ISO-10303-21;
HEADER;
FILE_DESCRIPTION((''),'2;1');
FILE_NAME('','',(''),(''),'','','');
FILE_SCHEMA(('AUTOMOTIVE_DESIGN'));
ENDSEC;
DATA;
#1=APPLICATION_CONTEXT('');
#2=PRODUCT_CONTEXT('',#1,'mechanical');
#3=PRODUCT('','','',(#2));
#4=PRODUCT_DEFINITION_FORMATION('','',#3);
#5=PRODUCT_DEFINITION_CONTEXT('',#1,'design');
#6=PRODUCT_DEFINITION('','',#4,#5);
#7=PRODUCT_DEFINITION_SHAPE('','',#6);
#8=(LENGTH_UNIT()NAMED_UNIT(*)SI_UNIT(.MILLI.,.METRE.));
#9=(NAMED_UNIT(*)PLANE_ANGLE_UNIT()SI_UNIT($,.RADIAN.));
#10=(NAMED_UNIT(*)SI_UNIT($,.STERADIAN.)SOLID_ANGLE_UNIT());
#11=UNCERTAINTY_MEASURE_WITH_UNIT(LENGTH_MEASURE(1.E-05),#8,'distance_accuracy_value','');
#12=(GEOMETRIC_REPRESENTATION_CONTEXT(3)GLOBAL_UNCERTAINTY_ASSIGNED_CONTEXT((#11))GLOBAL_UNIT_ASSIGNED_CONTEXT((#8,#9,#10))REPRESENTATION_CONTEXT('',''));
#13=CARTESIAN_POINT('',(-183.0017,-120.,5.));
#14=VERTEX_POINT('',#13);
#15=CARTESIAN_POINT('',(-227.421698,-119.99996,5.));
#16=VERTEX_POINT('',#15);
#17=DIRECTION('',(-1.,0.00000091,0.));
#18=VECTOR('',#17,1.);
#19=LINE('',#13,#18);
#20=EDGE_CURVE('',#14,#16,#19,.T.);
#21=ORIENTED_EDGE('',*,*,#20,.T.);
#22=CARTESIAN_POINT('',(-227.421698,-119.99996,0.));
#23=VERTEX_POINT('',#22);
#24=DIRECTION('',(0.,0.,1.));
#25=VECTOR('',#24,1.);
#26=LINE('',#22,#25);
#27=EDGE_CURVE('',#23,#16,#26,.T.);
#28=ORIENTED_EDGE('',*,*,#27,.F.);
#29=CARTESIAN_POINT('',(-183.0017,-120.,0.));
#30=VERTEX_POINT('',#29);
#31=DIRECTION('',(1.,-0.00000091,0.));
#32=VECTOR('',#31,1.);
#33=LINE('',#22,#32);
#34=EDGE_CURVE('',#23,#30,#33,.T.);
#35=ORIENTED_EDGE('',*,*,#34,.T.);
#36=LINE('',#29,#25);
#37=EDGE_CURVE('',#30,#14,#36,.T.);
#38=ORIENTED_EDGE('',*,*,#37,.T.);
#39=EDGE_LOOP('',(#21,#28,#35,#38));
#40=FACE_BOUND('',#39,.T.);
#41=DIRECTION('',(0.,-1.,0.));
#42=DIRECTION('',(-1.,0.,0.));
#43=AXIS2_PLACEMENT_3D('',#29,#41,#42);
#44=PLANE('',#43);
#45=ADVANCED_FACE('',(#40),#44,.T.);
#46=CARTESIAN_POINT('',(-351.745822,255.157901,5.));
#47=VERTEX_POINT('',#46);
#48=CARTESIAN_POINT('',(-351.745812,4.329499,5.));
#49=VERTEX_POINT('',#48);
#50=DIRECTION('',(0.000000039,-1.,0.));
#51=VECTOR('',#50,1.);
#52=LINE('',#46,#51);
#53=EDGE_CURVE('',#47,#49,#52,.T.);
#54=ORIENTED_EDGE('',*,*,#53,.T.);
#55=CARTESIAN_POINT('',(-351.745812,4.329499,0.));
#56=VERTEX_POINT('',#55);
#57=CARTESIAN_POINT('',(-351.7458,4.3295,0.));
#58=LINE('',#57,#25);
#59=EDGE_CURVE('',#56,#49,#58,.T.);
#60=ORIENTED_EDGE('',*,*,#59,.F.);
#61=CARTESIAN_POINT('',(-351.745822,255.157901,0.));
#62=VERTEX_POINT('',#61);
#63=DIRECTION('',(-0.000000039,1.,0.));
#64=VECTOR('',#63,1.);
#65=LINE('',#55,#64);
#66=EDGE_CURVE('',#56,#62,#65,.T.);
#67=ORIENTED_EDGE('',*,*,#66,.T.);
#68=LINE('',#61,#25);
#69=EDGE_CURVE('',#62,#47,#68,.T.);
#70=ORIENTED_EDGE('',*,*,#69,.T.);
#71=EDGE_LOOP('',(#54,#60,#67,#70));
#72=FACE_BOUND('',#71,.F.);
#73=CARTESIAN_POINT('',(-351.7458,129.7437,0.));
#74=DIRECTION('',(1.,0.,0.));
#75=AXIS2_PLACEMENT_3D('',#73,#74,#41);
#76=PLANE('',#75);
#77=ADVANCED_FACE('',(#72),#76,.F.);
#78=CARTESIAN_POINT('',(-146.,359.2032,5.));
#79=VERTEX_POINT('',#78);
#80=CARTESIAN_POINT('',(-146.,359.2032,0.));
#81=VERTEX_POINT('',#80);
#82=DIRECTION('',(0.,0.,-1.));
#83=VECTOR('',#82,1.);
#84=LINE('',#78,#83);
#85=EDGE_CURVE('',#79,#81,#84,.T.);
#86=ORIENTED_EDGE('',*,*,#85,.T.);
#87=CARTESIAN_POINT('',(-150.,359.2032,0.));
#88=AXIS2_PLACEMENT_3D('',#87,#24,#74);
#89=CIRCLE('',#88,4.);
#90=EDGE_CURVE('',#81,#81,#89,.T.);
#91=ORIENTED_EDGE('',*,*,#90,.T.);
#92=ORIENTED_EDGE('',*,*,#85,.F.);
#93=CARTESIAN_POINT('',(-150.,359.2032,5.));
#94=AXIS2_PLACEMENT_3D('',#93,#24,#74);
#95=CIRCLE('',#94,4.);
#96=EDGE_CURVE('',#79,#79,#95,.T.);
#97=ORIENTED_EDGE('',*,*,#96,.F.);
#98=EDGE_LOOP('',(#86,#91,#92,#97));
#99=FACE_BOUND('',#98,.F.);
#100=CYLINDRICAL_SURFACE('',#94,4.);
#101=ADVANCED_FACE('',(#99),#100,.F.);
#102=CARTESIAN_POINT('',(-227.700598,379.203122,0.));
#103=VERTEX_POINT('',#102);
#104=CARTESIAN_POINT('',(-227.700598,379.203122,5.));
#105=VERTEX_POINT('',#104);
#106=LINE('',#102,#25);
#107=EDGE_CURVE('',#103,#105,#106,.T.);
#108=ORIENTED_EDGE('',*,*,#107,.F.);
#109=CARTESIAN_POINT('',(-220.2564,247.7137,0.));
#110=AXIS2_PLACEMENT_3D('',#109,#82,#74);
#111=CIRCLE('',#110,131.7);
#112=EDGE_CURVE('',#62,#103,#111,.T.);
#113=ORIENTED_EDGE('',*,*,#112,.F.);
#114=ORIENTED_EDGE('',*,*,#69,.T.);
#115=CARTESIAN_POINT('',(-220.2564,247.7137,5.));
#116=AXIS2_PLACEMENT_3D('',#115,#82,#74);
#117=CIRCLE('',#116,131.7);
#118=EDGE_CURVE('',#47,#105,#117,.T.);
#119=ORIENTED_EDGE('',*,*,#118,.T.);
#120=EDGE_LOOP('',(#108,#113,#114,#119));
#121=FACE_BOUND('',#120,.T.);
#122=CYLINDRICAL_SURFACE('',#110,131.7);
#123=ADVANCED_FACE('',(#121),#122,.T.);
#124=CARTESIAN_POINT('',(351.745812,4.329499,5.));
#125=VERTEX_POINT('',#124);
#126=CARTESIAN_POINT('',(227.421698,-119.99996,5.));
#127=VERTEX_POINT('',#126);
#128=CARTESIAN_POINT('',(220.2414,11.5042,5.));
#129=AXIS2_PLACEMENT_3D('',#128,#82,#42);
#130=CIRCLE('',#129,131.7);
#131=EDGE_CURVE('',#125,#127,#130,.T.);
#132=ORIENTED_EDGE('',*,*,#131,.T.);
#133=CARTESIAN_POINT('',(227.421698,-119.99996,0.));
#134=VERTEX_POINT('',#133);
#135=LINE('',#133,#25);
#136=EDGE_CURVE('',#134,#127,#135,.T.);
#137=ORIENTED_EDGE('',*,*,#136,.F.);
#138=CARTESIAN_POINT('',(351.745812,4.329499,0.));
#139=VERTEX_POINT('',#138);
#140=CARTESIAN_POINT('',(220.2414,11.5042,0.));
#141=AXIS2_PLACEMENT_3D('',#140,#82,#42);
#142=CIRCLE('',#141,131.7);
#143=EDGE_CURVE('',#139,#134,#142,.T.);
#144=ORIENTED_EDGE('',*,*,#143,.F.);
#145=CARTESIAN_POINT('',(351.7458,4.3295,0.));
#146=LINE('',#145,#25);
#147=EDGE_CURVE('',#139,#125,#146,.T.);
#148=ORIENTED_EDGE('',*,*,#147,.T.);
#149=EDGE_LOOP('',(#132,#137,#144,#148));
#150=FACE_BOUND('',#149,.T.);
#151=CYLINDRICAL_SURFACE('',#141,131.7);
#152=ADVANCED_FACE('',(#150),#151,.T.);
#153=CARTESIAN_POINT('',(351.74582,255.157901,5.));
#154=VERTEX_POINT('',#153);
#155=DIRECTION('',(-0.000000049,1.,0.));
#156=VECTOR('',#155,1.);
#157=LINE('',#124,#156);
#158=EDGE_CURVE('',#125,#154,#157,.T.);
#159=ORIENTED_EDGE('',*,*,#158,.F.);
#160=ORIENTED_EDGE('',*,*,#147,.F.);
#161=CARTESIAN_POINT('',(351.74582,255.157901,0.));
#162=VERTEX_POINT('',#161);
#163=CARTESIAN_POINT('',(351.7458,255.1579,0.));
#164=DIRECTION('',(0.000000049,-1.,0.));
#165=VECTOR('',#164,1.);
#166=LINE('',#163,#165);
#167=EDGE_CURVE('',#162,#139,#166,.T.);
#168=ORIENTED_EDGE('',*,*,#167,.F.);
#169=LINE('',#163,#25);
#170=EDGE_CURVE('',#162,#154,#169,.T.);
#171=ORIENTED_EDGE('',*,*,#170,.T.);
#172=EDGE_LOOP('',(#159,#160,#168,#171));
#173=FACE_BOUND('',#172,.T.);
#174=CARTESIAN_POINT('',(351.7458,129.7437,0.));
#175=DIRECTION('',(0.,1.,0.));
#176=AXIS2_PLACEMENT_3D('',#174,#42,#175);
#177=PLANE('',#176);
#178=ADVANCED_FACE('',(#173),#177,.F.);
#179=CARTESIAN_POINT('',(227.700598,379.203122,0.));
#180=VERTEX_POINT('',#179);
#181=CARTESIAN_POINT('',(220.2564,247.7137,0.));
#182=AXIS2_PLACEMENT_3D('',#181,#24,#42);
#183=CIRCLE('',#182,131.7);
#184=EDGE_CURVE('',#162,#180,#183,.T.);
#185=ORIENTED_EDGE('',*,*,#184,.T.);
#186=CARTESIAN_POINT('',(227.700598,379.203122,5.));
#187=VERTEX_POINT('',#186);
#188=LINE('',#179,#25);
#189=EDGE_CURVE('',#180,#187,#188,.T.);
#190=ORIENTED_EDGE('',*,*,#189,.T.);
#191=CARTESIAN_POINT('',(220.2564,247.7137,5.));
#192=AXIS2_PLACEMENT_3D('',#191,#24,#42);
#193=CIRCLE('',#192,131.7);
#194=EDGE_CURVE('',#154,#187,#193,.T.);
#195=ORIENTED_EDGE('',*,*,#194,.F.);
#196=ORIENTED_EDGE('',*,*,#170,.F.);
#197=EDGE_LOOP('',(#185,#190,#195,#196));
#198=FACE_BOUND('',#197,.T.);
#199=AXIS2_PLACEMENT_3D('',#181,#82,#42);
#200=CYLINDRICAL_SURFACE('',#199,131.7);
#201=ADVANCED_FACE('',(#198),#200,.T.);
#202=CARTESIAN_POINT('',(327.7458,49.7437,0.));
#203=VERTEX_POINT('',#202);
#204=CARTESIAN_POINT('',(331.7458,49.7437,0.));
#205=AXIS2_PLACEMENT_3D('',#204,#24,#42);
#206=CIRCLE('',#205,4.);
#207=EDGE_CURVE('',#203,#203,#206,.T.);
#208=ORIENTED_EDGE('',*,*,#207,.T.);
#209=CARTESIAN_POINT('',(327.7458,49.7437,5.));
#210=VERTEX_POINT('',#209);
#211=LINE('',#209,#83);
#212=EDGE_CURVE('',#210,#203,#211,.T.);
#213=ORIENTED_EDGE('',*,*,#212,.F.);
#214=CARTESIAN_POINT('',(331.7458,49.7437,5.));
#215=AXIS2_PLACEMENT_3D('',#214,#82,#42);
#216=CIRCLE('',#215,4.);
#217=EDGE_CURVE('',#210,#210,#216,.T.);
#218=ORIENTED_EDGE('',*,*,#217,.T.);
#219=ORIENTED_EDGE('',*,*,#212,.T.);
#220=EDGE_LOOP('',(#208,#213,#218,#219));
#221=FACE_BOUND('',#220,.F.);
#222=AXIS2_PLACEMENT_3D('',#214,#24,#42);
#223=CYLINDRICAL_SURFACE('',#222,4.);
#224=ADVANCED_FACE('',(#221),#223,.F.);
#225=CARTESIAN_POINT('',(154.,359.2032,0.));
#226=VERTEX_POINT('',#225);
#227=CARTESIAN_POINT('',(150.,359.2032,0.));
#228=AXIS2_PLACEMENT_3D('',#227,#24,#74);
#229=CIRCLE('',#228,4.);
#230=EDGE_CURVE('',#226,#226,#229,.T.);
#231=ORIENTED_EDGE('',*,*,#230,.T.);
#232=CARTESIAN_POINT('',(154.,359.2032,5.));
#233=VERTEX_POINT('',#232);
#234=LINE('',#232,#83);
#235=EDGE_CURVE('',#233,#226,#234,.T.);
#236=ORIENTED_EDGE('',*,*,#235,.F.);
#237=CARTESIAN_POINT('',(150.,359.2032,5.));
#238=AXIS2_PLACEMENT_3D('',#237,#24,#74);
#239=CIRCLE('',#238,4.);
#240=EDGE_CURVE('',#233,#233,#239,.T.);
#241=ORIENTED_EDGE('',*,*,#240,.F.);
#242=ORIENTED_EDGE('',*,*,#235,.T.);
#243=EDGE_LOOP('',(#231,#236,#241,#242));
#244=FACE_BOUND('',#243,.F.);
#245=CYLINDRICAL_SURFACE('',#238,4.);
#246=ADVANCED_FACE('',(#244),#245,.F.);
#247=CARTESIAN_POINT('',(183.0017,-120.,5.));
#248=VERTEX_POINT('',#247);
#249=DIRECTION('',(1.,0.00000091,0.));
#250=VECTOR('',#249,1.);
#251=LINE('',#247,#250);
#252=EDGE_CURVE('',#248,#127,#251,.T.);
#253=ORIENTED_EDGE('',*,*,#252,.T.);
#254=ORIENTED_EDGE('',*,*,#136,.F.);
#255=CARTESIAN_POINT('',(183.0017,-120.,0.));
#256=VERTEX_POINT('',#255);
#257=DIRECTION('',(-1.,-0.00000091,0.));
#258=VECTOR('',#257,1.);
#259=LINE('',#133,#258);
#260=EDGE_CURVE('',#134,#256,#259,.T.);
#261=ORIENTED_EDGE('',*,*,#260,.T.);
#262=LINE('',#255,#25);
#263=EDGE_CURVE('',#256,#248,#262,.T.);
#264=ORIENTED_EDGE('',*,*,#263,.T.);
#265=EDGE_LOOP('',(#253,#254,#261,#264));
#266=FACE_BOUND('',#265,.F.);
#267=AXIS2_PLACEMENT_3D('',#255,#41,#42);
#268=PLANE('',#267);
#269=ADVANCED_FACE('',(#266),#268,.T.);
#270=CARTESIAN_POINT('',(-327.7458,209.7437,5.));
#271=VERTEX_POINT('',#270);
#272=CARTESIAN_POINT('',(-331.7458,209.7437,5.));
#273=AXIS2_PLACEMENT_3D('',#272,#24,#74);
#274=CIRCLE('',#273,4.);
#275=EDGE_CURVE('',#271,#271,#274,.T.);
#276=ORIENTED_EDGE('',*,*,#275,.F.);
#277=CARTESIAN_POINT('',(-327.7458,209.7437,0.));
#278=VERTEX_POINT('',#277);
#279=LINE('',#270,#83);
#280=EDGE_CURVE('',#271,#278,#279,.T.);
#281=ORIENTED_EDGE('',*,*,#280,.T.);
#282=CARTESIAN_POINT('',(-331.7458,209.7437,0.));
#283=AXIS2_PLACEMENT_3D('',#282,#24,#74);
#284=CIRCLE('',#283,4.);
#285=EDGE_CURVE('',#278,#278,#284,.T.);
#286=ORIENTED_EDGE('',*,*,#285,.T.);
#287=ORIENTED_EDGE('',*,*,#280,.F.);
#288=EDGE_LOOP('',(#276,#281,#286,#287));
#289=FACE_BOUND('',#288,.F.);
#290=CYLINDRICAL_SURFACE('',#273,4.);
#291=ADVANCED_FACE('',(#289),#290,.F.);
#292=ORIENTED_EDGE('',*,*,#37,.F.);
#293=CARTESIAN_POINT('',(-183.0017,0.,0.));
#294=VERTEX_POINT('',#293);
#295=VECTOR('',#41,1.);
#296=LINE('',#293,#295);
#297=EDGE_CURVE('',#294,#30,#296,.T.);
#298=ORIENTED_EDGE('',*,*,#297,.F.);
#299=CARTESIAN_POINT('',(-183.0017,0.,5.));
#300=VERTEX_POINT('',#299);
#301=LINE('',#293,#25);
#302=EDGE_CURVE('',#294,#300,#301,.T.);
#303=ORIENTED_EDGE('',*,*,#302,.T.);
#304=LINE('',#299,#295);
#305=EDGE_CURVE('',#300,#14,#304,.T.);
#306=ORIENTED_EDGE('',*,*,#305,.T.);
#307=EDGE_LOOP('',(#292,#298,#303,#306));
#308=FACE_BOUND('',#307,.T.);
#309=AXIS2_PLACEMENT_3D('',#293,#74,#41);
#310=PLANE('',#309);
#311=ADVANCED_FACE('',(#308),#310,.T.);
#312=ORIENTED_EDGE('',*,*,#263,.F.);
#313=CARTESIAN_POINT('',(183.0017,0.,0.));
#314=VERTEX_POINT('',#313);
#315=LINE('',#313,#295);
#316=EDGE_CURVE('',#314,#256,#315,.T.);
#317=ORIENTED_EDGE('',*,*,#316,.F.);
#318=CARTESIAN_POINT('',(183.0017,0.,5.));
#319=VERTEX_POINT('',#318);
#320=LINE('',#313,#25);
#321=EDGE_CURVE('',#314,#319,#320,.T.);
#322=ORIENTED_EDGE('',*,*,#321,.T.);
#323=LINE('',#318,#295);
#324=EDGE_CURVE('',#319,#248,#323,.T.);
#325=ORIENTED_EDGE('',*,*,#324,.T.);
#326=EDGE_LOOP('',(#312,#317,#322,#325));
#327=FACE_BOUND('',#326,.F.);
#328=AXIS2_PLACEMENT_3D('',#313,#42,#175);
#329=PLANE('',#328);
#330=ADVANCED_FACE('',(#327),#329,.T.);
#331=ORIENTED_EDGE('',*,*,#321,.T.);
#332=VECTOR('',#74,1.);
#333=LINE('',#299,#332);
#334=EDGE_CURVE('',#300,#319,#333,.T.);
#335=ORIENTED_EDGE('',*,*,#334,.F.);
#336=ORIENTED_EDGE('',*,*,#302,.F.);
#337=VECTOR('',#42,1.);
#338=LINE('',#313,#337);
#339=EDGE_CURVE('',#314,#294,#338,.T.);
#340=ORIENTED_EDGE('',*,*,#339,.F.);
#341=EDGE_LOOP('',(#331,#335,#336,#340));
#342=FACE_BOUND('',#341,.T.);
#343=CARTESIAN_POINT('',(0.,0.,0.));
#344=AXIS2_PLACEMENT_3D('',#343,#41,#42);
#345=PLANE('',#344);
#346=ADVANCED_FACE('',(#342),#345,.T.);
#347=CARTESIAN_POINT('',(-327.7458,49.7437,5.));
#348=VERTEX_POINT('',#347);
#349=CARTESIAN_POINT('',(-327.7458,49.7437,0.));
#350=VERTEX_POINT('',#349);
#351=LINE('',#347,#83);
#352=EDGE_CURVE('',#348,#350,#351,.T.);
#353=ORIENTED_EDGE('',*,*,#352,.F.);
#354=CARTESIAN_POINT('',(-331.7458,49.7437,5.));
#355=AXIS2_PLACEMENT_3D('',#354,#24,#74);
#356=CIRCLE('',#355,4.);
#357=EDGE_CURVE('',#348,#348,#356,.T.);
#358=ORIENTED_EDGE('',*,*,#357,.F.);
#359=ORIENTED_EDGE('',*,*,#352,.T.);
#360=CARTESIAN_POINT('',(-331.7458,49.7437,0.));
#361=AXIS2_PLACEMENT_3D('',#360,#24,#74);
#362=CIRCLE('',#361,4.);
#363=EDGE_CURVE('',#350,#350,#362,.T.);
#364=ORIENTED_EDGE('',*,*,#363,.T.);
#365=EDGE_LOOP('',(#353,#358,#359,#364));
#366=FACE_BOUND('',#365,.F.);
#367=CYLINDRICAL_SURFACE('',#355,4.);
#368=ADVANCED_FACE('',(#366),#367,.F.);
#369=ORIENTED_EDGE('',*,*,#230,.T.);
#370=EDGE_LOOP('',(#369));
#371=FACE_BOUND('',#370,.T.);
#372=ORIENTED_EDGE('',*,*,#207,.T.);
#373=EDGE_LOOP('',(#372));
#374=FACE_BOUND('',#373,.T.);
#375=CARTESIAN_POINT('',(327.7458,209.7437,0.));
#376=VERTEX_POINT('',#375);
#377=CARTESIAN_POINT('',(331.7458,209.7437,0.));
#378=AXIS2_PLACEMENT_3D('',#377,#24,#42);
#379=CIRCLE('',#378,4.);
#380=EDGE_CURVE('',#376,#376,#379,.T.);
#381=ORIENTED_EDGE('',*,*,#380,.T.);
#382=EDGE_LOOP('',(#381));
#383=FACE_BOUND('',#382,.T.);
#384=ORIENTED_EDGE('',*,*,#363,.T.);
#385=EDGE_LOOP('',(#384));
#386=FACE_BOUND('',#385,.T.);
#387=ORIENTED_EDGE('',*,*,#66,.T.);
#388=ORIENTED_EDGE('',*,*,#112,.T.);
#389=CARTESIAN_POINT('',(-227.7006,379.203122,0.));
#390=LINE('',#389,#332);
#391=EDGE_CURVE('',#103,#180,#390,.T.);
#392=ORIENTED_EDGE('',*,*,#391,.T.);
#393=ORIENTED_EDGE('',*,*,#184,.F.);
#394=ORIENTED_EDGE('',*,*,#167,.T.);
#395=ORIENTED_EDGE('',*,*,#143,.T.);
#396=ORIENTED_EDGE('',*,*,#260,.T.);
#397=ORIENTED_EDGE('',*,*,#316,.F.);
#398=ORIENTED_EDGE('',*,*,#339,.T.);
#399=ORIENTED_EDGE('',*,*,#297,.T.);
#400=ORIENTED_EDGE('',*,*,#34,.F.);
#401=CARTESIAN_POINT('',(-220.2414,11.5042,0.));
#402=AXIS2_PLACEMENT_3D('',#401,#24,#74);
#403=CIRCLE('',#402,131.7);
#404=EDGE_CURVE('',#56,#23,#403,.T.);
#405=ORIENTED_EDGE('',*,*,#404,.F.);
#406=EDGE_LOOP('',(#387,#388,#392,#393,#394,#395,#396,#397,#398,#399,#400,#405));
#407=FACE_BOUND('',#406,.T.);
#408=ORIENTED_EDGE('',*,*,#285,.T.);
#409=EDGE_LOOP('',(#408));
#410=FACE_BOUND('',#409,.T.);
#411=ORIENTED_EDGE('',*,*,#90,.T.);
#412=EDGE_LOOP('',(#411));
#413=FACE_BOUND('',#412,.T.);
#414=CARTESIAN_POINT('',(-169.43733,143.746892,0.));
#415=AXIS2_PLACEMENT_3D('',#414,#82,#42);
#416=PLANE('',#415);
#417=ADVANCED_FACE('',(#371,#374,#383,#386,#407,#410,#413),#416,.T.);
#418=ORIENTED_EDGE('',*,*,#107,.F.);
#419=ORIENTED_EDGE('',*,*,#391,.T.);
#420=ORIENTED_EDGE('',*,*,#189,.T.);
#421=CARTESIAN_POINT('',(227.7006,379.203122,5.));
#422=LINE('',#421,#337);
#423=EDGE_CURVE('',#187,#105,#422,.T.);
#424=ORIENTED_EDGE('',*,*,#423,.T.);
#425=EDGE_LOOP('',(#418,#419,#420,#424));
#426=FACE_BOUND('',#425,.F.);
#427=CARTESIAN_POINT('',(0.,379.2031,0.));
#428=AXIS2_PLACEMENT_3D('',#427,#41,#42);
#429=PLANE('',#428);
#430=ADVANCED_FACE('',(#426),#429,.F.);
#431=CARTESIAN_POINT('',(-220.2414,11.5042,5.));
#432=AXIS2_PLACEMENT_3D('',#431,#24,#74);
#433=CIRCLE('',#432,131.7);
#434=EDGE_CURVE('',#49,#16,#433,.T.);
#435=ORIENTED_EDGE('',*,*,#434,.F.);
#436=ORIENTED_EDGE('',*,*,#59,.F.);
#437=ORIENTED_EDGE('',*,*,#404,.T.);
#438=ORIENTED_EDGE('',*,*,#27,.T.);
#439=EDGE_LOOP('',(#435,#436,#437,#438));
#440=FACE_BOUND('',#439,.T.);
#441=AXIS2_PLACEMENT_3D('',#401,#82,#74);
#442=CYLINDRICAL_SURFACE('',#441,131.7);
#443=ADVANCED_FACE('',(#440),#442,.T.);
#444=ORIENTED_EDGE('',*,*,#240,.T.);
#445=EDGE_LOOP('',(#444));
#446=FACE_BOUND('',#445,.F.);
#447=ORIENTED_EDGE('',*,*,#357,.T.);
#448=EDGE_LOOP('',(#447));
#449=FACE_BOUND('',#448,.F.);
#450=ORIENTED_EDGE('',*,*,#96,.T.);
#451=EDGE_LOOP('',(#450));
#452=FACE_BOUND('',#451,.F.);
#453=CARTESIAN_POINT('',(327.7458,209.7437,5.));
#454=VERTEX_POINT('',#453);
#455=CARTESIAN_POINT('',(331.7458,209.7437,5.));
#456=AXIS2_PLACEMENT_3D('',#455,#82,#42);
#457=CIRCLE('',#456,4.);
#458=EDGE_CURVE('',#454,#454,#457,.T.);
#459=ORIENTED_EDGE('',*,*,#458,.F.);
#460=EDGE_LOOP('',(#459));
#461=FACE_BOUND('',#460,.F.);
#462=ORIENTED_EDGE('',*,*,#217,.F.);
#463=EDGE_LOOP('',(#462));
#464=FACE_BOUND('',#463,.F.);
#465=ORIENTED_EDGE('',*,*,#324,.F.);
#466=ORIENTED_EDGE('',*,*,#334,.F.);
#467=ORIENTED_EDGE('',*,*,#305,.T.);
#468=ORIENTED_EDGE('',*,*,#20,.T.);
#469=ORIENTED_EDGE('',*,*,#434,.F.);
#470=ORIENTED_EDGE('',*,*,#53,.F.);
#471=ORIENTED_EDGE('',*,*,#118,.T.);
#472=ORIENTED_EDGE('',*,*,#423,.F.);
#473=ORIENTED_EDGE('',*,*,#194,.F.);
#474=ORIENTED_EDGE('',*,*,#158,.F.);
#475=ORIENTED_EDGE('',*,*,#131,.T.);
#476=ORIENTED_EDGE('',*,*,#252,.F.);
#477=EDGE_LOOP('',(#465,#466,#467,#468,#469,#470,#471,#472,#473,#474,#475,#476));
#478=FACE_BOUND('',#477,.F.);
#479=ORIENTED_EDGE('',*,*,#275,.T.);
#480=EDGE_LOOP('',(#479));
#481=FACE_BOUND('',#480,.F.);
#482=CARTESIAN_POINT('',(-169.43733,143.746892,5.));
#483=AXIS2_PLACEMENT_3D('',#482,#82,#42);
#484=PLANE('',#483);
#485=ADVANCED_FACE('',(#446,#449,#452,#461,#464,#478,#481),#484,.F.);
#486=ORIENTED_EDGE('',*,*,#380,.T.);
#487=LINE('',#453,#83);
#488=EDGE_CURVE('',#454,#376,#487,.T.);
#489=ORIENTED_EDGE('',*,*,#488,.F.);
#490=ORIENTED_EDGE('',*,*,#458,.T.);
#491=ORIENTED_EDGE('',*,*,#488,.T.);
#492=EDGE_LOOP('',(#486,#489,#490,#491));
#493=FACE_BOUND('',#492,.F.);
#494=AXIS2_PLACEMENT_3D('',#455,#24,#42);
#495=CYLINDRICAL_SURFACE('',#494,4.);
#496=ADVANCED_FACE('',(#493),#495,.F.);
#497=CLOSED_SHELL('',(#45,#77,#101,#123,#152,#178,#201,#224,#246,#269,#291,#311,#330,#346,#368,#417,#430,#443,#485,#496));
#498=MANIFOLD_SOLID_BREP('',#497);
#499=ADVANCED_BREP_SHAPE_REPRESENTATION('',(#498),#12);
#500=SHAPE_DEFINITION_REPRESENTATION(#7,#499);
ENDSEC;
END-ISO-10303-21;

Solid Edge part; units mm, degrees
sketch "Sketch1" plane through (0, 0, 0) normal (0, 0, 1) x (1, 0, 0)
  line L0 (-183.0017, -120) -> (-227.4217, -120)
  line L1 (-289.5811, -57.8353) -> (-227.4217, -120)
  line L2 (-289.5811, -57.8353) -> (-351.7458, 4.3295)
  line L3 (-351.7458, 129.7437) -> (-351.7458, 4.3295)
  line L4 (-351.7458, 129.7437) -> (-351.7458, 255.1579)
  line L5 (-289.4346, 317.4691) -> (-351.7458, 255.1579)
  line L6 (-289.4346, 317.4691) -> (-227.7006, 379.2031)
  line L7 (0, 379.2031) -> (-227.7006, 379.2031)
  line L8 (0, 379.2031) -> (0, 0)
  line L9 (0, 0) -> (-183.0017, 0)
  line L10 (-183.0017, 0) -> (-183.0017, -120)
  dimension "D1" = 351.7458
  dimension "D2" = 227.7006
  dimension "D3" = 120
  dimension "D4" = 44.42
  dimension "D5" = 87.3051
  dimension "D6" = 88.1213
  dimension "D7" = 125.4142
  dimension "D8" = 125.4142
  dimension "D9" = 87.9142
  dimension "D10" = 87.9104
  dimension "D11" = 499.2031
extrude "Protrusion1" add sketch "Sketch1" along normal blind 5
mirror "Mirror1" about plane through (0, 0, 0) normal (1, 0, 0) of "Protrusion1"
sketch "Sketch2" plane through (0, 149.6016, 5) normal (0, 0, 1) x (1, 0, 0)
  circle A0 centre (150, 209.6016) radius 4
  circle A1 centre (-150, 209.6016) radius 4
  dimension "D1" = 20
  dimension "D2" = 8
  dimension "D3" = 300
extrude "Cutout1" cut sketch "Sketch2" against normal through all
sketch "Sketch3" plane through (0, 149.6016, 5) normal (0, 0, 1) x (1, 0, 0)
  circle A0 centre (-331.7458, 60.1421) radius 4
  circle A1 centre (-331.7458, -99.8579) radius 4
  dimension "D1" = 160
  dimension "D2" = 20
  dimension "D3" = 8
extrude "Cutout2" cut sketch "Sketch3" against normal through all
mirror "Mirror2" about plane through (0, 0, 0) normal (1, 0, 0) of "Cutout2"
sketch "Sketch4" plane through (0, 149.6016, 0) normal (0, 0, -1) x (-1, 0, 0)
  line L0 (-351.7458, -111.1142) -> (-193.1203, -269.6016)
  line L1 (-193.1203, -269.6016) -> (-227.4217, -269.6016)
  arc A0 (-351.7458, -145.2721) -> (-227.4217, -269.6016) centre (-220.2414, -138.0974) ccw
  line L2 (-351.7458, -111.1142) -> (-351.7458, -145.2721)
  dimension "D1" = 131.7
extrude "Protrusion2" add sketch "Sketch4" against normal up to vertex (5 mm away)
sketch "Sketch5" plane through (0, 149.6016, 0) normal (0, 0, -1) x (-1, 0, 0)
  line L0 (-227.7006, 229.6016) -> (-351.7458, 105.5563)
  arc A0 (-351.7458, 105.5563) -> (-227.7006, 229.6016) centre (-220.2564, 98.1121) cw
extrude "Protrusion3" add sketch "Sketch5" against normal up to vertex (5 mm away)
mirror "Mirror3" about plane through (0, 0, 0) normal (1, 0, 0) of "Protrusion3", "Protrusion2"
properties material "ABS-Plastik, mittelfest"
